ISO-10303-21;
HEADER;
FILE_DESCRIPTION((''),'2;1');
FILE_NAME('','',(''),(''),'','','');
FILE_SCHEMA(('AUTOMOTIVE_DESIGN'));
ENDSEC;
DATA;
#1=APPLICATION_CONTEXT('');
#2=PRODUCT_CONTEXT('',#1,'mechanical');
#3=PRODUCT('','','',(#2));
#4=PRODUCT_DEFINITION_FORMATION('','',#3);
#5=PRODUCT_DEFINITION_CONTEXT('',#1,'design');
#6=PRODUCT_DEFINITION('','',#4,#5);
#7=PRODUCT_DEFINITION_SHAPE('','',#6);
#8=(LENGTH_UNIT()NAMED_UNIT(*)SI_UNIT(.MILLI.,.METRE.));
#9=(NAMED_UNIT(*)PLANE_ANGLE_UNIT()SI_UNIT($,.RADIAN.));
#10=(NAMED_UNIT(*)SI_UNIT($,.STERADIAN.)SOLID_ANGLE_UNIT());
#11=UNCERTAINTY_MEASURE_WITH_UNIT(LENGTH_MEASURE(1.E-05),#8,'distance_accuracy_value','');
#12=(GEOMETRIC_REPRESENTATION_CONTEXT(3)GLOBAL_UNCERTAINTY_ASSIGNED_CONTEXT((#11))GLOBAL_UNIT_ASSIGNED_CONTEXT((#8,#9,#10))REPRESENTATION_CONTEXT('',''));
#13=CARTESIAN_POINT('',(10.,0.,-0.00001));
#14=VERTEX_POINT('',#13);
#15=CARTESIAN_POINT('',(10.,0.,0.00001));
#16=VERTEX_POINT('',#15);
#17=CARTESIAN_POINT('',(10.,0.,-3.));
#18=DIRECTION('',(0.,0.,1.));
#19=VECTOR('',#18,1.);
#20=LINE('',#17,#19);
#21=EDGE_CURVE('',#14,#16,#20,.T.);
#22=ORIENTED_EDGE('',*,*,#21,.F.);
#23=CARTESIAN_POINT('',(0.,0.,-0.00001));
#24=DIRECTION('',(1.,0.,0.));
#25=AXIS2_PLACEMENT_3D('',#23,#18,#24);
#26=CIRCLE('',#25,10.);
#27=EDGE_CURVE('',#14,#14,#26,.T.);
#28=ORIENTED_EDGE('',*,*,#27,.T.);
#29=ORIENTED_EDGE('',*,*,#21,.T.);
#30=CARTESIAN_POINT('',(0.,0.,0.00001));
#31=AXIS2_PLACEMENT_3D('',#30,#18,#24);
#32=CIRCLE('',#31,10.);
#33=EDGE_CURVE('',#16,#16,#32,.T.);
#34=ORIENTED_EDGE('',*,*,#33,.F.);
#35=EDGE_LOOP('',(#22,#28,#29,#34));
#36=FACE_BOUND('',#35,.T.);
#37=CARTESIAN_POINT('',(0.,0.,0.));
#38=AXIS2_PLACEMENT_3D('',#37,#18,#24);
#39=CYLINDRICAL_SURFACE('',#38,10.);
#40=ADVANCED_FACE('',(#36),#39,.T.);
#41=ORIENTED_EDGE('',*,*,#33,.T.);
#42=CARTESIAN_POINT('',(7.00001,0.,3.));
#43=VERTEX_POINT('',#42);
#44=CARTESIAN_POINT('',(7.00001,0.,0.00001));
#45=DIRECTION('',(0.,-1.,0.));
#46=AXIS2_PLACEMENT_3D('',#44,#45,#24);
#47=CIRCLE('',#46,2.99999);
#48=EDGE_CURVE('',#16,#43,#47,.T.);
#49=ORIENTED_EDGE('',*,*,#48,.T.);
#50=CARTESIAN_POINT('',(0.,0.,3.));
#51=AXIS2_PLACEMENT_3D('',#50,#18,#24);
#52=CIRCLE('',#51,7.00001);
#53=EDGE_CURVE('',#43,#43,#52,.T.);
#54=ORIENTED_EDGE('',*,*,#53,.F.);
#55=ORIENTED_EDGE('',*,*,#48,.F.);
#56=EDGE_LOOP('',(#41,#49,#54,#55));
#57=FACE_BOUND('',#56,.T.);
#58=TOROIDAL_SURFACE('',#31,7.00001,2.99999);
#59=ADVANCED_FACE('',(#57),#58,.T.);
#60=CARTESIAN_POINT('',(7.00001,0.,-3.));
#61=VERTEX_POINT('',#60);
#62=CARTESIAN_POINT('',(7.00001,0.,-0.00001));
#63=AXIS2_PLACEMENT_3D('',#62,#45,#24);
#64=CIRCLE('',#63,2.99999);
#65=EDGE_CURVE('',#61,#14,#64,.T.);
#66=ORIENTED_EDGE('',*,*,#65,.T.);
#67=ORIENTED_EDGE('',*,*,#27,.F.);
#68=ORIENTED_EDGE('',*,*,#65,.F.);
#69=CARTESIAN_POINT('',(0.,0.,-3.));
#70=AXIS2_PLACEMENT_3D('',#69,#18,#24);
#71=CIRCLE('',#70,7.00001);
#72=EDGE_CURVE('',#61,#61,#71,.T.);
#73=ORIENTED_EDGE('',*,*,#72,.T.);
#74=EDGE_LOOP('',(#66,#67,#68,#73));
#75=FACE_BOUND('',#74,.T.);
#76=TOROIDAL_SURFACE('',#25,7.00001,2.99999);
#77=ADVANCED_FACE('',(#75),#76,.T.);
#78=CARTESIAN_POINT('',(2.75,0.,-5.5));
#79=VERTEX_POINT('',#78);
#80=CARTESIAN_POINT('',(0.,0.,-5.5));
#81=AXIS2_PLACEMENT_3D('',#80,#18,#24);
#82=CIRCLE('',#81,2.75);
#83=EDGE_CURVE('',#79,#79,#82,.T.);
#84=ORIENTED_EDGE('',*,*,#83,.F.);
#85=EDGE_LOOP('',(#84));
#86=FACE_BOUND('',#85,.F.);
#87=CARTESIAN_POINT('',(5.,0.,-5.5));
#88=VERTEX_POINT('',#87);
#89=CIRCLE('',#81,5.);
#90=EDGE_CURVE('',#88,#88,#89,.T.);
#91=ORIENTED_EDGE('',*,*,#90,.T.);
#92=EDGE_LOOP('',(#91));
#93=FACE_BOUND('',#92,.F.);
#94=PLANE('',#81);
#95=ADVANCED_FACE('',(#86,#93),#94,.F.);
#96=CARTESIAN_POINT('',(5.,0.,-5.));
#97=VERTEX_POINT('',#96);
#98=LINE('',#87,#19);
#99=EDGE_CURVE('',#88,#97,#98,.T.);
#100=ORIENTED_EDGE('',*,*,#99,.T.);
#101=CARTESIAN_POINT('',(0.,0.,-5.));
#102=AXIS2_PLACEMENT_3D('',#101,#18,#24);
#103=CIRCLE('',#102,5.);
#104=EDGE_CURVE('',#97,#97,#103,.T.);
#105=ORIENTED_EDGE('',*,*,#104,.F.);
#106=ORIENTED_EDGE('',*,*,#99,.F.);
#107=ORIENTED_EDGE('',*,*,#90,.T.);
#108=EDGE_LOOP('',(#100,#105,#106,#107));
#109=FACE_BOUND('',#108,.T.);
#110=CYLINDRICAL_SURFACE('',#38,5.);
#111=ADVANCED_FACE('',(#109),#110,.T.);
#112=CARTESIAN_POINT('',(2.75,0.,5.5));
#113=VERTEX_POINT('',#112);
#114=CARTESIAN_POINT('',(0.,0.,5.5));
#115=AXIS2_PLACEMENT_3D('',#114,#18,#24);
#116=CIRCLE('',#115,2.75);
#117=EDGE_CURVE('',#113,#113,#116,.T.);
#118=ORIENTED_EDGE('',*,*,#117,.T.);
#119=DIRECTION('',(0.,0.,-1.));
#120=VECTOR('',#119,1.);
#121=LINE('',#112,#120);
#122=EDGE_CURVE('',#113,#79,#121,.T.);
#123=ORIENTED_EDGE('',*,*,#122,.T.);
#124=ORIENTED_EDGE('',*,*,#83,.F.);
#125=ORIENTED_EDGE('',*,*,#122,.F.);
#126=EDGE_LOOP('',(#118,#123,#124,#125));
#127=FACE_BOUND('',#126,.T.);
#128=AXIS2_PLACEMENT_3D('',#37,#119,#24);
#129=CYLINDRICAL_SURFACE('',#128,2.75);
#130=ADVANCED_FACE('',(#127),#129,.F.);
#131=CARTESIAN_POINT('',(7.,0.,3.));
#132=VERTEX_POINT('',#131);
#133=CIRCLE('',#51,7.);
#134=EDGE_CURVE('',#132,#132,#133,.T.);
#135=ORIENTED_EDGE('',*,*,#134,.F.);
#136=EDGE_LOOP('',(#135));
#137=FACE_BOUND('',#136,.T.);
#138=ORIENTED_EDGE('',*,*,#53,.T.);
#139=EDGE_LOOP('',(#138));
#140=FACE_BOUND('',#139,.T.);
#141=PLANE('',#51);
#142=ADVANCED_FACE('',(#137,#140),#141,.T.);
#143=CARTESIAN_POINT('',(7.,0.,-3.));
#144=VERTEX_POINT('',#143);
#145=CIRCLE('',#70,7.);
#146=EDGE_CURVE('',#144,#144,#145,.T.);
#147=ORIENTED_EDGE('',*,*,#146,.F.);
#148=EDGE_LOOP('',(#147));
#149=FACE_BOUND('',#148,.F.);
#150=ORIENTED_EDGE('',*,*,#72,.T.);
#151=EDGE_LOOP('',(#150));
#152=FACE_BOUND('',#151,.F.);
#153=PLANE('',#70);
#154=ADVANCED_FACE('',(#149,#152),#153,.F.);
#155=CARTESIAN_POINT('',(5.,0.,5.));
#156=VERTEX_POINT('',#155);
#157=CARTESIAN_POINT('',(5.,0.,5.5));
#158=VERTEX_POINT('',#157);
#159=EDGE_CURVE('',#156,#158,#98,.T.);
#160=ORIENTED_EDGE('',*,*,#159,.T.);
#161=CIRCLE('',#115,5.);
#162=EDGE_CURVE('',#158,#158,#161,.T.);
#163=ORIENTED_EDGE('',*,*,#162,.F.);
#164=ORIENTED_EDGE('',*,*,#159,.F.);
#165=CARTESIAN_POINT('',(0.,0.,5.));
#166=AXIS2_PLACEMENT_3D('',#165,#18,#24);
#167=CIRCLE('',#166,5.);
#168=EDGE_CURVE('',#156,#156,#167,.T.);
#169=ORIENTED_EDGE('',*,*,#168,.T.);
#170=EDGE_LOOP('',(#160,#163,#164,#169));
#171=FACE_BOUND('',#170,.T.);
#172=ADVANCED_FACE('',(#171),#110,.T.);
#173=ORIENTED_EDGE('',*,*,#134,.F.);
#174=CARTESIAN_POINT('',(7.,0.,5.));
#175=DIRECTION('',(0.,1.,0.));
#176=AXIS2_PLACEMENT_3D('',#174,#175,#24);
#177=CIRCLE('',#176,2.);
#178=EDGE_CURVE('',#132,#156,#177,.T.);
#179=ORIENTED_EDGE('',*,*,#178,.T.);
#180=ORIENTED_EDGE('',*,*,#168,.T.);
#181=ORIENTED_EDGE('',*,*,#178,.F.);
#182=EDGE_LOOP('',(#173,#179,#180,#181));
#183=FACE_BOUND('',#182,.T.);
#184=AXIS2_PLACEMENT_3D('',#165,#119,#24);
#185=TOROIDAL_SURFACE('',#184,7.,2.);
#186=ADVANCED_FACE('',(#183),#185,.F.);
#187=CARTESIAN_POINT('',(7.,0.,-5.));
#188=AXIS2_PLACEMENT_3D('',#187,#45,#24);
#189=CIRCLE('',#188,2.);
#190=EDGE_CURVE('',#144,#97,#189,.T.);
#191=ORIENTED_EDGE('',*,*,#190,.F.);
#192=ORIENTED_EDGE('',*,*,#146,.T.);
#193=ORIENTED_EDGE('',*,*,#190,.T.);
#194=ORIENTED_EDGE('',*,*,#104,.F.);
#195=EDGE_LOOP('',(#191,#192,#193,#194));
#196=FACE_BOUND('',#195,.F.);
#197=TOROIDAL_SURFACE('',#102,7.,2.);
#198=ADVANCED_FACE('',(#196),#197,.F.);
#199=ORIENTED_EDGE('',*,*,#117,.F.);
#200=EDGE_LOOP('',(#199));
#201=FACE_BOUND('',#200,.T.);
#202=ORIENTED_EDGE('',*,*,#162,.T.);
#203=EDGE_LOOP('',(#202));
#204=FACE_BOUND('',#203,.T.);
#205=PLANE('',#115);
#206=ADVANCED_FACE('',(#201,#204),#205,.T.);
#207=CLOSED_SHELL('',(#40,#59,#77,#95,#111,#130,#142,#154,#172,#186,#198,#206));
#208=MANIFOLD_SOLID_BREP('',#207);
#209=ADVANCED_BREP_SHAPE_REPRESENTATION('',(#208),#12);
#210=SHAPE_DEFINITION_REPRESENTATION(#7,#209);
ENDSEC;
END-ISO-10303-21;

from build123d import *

# Parameters (mm, degrees)
F0_R     = 5
F0_R_2   = 2.75
F1_DEPTH = 5.5
F0_R_3   = 10
F2_DEPTH = 3
F3_R     = 2.99999
F4_R     = 2


# Not quite as in the source:
# - a fillet or chamfer is up to 0.001 mm smaller than in the source, because OpenCascade refuses the exact size


with BuildPart() as f1:
    # F0 (on Top) → F1 (new body, symmetric)
    with BuildSketch(Plane.XY):
        Circle(F0_R)
        Circle(F0_R_2, mode=Mode.SUBTRACT)
    extrude(amount=F1_DEPTH, both=True)

    # F0 (on Top) → F2 (join, symmetric)
    with BuildSketch(Plane.XY):
        Circle(F0_R_3)
        Circle(F0_R, mode=Mode.SUBTRACT)
    extrude(amount=F2_DEPTH, both=True)

    # F3 (radius 3 in the source; OpenCascade refuses exactly that, so slightly less here)
    f3_edges = [f1.edges().sort_by_distance(p)[0] for p in [
        (-10, 0, 3),
        (-10, 0, -3),
    ]]
    fillet(f3_edges, radius=F3_R)

    # F4
    f4_edges = [f1.edges().sort_by_distance(p)[0] for p in [
        (-5, 0, 3),
        (-5, 0, -3),
    ]]
    fillet(f4_edges, radius=F4_R)


solid = f1.part
